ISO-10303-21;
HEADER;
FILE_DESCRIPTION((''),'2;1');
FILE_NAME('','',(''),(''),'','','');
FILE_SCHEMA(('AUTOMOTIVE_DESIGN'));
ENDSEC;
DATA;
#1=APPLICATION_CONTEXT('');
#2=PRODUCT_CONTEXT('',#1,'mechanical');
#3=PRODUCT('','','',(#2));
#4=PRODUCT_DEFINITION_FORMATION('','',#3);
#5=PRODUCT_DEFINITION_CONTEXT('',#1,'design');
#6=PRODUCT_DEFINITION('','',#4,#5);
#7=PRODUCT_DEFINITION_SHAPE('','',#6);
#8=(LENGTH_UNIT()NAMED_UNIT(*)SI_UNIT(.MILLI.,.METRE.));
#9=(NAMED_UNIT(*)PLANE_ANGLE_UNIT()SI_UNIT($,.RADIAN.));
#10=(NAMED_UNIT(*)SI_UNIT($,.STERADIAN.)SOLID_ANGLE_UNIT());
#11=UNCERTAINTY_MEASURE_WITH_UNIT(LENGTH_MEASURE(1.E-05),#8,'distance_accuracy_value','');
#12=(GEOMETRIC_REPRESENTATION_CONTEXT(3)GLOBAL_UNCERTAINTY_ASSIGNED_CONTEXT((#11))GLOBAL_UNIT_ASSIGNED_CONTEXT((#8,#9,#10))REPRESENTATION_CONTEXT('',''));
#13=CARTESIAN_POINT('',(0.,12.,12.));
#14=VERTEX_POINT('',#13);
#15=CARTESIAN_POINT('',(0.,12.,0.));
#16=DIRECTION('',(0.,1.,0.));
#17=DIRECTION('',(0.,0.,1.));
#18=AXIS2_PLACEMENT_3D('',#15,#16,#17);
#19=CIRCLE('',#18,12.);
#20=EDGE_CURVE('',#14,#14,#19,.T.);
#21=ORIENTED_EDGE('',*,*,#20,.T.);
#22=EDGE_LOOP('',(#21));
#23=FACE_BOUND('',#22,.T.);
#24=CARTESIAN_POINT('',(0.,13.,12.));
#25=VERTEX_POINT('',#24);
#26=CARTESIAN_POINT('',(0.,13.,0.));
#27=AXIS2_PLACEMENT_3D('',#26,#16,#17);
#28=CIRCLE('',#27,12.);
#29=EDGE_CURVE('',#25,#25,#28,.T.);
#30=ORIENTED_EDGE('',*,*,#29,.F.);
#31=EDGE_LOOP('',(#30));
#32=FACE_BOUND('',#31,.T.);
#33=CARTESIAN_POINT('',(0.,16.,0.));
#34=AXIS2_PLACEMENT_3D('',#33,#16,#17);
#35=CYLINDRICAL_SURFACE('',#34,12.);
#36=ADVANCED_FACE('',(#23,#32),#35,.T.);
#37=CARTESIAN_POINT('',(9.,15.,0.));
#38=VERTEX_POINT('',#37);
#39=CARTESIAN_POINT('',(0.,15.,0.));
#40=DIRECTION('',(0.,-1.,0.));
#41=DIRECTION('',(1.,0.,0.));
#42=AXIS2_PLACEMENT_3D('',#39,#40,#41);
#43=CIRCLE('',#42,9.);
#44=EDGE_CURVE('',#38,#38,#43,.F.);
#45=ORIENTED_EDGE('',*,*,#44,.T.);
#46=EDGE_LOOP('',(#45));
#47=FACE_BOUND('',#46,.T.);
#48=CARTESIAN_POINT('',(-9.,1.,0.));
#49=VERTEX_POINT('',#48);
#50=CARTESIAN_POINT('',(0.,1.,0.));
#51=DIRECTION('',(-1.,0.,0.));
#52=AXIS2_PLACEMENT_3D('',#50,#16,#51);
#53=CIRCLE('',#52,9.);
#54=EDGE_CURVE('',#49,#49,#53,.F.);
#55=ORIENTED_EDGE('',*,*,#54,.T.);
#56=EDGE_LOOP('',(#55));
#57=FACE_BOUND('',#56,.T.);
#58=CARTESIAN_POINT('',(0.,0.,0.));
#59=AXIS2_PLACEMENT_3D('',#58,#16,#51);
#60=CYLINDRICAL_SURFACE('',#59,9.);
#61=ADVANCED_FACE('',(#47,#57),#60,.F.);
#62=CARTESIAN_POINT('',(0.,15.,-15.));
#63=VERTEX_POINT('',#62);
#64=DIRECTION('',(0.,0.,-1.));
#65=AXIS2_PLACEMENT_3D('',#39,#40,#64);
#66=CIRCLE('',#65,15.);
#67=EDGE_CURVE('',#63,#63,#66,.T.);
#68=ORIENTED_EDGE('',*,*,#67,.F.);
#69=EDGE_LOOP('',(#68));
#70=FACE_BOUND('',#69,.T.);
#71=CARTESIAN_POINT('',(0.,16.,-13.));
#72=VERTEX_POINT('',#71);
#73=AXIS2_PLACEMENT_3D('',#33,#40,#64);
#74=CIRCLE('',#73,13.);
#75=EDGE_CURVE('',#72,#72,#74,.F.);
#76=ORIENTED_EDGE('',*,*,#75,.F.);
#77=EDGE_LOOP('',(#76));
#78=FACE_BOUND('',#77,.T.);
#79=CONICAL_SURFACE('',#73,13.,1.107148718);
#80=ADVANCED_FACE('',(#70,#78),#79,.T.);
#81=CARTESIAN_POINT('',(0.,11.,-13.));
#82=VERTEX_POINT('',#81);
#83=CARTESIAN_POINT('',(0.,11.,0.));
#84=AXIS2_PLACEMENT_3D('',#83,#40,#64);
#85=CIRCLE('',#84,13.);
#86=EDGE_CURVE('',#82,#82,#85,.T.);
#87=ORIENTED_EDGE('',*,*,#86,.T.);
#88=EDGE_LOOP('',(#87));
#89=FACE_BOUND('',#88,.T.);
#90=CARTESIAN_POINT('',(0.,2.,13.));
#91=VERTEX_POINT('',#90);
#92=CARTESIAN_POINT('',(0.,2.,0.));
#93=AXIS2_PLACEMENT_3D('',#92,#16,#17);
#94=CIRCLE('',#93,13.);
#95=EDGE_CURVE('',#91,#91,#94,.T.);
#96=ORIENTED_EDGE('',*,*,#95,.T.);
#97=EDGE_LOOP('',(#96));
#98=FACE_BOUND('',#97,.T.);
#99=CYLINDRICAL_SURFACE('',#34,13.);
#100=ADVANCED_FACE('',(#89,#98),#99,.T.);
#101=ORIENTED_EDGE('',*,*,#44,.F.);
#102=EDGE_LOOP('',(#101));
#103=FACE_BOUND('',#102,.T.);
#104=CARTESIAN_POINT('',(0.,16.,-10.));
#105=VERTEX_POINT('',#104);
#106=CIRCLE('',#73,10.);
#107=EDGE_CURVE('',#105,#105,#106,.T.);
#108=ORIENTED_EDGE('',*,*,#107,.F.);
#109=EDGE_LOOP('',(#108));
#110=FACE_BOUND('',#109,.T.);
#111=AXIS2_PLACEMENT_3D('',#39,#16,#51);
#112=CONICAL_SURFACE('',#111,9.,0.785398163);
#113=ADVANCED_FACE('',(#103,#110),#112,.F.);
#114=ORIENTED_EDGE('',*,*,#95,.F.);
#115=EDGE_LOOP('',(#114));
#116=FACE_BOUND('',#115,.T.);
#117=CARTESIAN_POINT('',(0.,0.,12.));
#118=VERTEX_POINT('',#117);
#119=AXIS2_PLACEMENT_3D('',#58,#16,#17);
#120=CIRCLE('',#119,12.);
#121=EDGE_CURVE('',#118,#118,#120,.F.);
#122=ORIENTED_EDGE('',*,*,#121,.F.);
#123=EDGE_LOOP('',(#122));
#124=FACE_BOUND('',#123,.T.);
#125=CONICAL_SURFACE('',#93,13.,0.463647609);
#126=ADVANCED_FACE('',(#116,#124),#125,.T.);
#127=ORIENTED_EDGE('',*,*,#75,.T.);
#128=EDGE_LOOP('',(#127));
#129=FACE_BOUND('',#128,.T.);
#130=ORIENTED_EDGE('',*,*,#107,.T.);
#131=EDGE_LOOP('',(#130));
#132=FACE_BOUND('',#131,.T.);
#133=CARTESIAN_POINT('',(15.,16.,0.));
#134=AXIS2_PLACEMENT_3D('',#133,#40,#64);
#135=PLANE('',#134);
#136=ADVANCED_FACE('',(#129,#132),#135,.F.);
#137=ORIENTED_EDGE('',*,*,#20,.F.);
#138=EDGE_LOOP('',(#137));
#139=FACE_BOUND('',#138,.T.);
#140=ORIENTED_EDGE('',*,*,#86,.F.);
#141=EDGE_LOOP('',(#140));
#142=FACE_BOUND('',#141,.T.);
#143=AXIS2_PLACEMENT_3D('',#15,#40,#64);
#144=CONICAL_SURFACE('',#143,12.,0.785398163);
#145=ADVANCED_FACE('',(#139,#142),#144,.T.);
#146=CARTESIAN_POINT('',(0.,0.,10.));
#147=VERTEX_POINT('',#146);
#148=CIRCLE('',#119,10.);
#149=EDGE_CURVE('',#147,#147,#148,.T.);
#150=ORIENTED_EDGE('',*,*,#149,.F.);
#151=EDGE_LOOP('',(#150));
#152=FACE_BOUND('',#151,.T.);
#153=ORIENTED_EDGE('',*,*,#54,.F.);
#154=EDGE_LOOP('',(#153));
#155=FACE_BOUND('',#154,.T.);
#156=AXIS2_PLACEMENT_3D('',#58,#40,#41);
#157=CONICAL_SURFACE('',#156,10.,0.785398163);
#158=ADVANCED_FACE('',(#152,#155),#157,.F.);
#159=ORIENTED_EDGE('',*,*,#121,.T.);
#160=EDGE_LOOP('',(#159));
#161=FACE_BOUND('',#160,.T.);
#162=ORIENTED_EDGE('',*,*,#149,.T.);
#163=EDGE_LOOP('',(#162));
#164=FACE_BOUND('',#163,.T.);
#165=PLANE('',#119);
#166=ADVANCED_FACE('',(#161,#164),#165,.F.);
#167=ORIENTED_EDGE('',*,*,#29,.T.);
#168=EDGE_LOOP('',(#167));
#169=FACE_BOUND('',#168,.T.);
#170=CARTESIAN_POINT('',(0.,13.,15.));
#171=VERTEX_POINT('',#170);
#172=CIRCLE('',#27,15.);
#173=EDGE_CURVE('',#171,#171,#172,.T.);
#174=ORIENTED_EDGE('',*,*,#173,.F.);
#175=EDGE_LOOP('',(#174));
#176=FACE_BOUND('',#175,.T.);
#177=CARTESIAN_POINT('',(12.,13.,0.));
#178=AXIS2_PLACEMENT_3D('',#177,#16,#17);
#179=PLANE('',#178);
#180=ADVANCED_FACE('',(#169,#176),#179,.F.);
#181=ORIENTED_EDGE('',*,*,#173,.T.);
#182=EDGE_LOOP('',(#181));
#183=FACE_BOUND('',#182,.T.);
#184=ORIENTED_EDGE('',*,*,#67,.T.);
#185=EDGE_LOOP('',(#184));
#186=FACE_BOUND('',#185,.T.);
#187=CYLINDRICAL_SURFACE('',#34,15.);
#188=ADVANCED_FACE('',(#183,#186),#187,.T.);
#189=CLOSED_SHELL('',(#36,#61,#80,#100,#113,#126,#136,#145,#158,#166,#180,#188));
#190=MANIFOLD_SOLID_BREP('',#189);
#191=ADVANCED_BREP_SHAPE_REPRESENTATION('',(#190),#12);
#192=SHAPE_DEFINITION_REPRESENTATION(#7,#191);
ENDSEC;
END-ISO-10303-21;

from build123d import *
from OCP.BRepFilletAPI import BRepFilletAPI_MakeChamfer

# Parameters (mm, degrees)
SKETCH_2_R          = 9
CUT_EXTRUDE_1_DEPTH = 27.570660511
CHAMFER_1_SIZE      = 1
CHAMFER_1_SIZE2     = 2
CHAMFER_2_SIZE      = 1


with BuildPart() as part:
    # 草图1 → 旋转1 (revolve)
    with BuildSketch(Plane.XY, mode=Mode.PRIVATE) as revolve_1_sk:
        Polygon((0, 0), (13, 0), (13, 12), (12, 12), (12, 13), (15, 13), (15, 16), (0, 16), align=None)
    revolve(revolve_1_sk.sketch.rotate(Axis((0, 16, 0), (0, -1, 0)), 90), axis=Axis((0, 16, 0), (0, -1, 0)))

    # 草图2 → 切除-拉伸1 (cut, through all)
    with BuildSketch(Plane(origin=(0, 16, 0), x_dir=(1, 0, 0), z_dir=(0, 1, 0))):
        with Locations(Location((0, 0, 0), (0, 0, 180))):
            Circle(SKETCH_2_R)
    extrude(amount=-CUT_EXTRUDE_1_DEPTH, mode=Mode.SUBTRACT)

    # 倒角1: one chamfer whose edges measure the first distance from different faces: ONE call of the kernel's chamfer builder (chamfer() names one face for all edges)
    chamfer_1_edges_1 = [part.edges().sort_by_distance(p)[0] for p in [
        (0, 16, -15),
    ]]
    chamfer_1_side_1 = [part.faces().sort_by_distance(p)[0] for p in [
        (0, 14.5, -15),
    ]]
    chamfer_1_edges_2 = [part.edges().sort_by_distance(p)[0] for p in [
        (0, 0, -13),
    ]]
    chamfer_1_side_2 = [part.faces().sort_by_distance(p)[0] for p in [
        (0, 0, -12.632304474),
    ]]
    chamfer_1 = BRepFilletAPI_MakeChamfer(part.part.solid().wrapped)
    for e in chamfer_1_edges_1:
        chamfer_1.Add(CHAMFER_1_SIZE, CHAMFER_1_SIZE2, e.wrapped, chamfer_1_side_1[0].wrapped)  # the first distance lies on this face
    for e in chamfer_1_edges_2:
        chamfer_1.Add(CHAMFER_1_SIZE, CHAMFER_1_SIZE2, e.wrapped, chamfer_1_side_2[0].wrapped)  # the first distance lies on this face
    add(Compound.cast(chamfer_1.Shape()), mode=Mode.REPLACE)

    # 倒角2
    chamfer_2_edges = [part.edges().sort_by_distance(p)[0] for p in [
        (9, 0, 0),
        (9, 16, 0),
        (0, 12, -13),
    ]]
    chamfer(chamfer_2_edges, length=CHAMFER_2_SIZE - 0.0001)  # a hair under: the kernel refuses the full size


solid = part.part
